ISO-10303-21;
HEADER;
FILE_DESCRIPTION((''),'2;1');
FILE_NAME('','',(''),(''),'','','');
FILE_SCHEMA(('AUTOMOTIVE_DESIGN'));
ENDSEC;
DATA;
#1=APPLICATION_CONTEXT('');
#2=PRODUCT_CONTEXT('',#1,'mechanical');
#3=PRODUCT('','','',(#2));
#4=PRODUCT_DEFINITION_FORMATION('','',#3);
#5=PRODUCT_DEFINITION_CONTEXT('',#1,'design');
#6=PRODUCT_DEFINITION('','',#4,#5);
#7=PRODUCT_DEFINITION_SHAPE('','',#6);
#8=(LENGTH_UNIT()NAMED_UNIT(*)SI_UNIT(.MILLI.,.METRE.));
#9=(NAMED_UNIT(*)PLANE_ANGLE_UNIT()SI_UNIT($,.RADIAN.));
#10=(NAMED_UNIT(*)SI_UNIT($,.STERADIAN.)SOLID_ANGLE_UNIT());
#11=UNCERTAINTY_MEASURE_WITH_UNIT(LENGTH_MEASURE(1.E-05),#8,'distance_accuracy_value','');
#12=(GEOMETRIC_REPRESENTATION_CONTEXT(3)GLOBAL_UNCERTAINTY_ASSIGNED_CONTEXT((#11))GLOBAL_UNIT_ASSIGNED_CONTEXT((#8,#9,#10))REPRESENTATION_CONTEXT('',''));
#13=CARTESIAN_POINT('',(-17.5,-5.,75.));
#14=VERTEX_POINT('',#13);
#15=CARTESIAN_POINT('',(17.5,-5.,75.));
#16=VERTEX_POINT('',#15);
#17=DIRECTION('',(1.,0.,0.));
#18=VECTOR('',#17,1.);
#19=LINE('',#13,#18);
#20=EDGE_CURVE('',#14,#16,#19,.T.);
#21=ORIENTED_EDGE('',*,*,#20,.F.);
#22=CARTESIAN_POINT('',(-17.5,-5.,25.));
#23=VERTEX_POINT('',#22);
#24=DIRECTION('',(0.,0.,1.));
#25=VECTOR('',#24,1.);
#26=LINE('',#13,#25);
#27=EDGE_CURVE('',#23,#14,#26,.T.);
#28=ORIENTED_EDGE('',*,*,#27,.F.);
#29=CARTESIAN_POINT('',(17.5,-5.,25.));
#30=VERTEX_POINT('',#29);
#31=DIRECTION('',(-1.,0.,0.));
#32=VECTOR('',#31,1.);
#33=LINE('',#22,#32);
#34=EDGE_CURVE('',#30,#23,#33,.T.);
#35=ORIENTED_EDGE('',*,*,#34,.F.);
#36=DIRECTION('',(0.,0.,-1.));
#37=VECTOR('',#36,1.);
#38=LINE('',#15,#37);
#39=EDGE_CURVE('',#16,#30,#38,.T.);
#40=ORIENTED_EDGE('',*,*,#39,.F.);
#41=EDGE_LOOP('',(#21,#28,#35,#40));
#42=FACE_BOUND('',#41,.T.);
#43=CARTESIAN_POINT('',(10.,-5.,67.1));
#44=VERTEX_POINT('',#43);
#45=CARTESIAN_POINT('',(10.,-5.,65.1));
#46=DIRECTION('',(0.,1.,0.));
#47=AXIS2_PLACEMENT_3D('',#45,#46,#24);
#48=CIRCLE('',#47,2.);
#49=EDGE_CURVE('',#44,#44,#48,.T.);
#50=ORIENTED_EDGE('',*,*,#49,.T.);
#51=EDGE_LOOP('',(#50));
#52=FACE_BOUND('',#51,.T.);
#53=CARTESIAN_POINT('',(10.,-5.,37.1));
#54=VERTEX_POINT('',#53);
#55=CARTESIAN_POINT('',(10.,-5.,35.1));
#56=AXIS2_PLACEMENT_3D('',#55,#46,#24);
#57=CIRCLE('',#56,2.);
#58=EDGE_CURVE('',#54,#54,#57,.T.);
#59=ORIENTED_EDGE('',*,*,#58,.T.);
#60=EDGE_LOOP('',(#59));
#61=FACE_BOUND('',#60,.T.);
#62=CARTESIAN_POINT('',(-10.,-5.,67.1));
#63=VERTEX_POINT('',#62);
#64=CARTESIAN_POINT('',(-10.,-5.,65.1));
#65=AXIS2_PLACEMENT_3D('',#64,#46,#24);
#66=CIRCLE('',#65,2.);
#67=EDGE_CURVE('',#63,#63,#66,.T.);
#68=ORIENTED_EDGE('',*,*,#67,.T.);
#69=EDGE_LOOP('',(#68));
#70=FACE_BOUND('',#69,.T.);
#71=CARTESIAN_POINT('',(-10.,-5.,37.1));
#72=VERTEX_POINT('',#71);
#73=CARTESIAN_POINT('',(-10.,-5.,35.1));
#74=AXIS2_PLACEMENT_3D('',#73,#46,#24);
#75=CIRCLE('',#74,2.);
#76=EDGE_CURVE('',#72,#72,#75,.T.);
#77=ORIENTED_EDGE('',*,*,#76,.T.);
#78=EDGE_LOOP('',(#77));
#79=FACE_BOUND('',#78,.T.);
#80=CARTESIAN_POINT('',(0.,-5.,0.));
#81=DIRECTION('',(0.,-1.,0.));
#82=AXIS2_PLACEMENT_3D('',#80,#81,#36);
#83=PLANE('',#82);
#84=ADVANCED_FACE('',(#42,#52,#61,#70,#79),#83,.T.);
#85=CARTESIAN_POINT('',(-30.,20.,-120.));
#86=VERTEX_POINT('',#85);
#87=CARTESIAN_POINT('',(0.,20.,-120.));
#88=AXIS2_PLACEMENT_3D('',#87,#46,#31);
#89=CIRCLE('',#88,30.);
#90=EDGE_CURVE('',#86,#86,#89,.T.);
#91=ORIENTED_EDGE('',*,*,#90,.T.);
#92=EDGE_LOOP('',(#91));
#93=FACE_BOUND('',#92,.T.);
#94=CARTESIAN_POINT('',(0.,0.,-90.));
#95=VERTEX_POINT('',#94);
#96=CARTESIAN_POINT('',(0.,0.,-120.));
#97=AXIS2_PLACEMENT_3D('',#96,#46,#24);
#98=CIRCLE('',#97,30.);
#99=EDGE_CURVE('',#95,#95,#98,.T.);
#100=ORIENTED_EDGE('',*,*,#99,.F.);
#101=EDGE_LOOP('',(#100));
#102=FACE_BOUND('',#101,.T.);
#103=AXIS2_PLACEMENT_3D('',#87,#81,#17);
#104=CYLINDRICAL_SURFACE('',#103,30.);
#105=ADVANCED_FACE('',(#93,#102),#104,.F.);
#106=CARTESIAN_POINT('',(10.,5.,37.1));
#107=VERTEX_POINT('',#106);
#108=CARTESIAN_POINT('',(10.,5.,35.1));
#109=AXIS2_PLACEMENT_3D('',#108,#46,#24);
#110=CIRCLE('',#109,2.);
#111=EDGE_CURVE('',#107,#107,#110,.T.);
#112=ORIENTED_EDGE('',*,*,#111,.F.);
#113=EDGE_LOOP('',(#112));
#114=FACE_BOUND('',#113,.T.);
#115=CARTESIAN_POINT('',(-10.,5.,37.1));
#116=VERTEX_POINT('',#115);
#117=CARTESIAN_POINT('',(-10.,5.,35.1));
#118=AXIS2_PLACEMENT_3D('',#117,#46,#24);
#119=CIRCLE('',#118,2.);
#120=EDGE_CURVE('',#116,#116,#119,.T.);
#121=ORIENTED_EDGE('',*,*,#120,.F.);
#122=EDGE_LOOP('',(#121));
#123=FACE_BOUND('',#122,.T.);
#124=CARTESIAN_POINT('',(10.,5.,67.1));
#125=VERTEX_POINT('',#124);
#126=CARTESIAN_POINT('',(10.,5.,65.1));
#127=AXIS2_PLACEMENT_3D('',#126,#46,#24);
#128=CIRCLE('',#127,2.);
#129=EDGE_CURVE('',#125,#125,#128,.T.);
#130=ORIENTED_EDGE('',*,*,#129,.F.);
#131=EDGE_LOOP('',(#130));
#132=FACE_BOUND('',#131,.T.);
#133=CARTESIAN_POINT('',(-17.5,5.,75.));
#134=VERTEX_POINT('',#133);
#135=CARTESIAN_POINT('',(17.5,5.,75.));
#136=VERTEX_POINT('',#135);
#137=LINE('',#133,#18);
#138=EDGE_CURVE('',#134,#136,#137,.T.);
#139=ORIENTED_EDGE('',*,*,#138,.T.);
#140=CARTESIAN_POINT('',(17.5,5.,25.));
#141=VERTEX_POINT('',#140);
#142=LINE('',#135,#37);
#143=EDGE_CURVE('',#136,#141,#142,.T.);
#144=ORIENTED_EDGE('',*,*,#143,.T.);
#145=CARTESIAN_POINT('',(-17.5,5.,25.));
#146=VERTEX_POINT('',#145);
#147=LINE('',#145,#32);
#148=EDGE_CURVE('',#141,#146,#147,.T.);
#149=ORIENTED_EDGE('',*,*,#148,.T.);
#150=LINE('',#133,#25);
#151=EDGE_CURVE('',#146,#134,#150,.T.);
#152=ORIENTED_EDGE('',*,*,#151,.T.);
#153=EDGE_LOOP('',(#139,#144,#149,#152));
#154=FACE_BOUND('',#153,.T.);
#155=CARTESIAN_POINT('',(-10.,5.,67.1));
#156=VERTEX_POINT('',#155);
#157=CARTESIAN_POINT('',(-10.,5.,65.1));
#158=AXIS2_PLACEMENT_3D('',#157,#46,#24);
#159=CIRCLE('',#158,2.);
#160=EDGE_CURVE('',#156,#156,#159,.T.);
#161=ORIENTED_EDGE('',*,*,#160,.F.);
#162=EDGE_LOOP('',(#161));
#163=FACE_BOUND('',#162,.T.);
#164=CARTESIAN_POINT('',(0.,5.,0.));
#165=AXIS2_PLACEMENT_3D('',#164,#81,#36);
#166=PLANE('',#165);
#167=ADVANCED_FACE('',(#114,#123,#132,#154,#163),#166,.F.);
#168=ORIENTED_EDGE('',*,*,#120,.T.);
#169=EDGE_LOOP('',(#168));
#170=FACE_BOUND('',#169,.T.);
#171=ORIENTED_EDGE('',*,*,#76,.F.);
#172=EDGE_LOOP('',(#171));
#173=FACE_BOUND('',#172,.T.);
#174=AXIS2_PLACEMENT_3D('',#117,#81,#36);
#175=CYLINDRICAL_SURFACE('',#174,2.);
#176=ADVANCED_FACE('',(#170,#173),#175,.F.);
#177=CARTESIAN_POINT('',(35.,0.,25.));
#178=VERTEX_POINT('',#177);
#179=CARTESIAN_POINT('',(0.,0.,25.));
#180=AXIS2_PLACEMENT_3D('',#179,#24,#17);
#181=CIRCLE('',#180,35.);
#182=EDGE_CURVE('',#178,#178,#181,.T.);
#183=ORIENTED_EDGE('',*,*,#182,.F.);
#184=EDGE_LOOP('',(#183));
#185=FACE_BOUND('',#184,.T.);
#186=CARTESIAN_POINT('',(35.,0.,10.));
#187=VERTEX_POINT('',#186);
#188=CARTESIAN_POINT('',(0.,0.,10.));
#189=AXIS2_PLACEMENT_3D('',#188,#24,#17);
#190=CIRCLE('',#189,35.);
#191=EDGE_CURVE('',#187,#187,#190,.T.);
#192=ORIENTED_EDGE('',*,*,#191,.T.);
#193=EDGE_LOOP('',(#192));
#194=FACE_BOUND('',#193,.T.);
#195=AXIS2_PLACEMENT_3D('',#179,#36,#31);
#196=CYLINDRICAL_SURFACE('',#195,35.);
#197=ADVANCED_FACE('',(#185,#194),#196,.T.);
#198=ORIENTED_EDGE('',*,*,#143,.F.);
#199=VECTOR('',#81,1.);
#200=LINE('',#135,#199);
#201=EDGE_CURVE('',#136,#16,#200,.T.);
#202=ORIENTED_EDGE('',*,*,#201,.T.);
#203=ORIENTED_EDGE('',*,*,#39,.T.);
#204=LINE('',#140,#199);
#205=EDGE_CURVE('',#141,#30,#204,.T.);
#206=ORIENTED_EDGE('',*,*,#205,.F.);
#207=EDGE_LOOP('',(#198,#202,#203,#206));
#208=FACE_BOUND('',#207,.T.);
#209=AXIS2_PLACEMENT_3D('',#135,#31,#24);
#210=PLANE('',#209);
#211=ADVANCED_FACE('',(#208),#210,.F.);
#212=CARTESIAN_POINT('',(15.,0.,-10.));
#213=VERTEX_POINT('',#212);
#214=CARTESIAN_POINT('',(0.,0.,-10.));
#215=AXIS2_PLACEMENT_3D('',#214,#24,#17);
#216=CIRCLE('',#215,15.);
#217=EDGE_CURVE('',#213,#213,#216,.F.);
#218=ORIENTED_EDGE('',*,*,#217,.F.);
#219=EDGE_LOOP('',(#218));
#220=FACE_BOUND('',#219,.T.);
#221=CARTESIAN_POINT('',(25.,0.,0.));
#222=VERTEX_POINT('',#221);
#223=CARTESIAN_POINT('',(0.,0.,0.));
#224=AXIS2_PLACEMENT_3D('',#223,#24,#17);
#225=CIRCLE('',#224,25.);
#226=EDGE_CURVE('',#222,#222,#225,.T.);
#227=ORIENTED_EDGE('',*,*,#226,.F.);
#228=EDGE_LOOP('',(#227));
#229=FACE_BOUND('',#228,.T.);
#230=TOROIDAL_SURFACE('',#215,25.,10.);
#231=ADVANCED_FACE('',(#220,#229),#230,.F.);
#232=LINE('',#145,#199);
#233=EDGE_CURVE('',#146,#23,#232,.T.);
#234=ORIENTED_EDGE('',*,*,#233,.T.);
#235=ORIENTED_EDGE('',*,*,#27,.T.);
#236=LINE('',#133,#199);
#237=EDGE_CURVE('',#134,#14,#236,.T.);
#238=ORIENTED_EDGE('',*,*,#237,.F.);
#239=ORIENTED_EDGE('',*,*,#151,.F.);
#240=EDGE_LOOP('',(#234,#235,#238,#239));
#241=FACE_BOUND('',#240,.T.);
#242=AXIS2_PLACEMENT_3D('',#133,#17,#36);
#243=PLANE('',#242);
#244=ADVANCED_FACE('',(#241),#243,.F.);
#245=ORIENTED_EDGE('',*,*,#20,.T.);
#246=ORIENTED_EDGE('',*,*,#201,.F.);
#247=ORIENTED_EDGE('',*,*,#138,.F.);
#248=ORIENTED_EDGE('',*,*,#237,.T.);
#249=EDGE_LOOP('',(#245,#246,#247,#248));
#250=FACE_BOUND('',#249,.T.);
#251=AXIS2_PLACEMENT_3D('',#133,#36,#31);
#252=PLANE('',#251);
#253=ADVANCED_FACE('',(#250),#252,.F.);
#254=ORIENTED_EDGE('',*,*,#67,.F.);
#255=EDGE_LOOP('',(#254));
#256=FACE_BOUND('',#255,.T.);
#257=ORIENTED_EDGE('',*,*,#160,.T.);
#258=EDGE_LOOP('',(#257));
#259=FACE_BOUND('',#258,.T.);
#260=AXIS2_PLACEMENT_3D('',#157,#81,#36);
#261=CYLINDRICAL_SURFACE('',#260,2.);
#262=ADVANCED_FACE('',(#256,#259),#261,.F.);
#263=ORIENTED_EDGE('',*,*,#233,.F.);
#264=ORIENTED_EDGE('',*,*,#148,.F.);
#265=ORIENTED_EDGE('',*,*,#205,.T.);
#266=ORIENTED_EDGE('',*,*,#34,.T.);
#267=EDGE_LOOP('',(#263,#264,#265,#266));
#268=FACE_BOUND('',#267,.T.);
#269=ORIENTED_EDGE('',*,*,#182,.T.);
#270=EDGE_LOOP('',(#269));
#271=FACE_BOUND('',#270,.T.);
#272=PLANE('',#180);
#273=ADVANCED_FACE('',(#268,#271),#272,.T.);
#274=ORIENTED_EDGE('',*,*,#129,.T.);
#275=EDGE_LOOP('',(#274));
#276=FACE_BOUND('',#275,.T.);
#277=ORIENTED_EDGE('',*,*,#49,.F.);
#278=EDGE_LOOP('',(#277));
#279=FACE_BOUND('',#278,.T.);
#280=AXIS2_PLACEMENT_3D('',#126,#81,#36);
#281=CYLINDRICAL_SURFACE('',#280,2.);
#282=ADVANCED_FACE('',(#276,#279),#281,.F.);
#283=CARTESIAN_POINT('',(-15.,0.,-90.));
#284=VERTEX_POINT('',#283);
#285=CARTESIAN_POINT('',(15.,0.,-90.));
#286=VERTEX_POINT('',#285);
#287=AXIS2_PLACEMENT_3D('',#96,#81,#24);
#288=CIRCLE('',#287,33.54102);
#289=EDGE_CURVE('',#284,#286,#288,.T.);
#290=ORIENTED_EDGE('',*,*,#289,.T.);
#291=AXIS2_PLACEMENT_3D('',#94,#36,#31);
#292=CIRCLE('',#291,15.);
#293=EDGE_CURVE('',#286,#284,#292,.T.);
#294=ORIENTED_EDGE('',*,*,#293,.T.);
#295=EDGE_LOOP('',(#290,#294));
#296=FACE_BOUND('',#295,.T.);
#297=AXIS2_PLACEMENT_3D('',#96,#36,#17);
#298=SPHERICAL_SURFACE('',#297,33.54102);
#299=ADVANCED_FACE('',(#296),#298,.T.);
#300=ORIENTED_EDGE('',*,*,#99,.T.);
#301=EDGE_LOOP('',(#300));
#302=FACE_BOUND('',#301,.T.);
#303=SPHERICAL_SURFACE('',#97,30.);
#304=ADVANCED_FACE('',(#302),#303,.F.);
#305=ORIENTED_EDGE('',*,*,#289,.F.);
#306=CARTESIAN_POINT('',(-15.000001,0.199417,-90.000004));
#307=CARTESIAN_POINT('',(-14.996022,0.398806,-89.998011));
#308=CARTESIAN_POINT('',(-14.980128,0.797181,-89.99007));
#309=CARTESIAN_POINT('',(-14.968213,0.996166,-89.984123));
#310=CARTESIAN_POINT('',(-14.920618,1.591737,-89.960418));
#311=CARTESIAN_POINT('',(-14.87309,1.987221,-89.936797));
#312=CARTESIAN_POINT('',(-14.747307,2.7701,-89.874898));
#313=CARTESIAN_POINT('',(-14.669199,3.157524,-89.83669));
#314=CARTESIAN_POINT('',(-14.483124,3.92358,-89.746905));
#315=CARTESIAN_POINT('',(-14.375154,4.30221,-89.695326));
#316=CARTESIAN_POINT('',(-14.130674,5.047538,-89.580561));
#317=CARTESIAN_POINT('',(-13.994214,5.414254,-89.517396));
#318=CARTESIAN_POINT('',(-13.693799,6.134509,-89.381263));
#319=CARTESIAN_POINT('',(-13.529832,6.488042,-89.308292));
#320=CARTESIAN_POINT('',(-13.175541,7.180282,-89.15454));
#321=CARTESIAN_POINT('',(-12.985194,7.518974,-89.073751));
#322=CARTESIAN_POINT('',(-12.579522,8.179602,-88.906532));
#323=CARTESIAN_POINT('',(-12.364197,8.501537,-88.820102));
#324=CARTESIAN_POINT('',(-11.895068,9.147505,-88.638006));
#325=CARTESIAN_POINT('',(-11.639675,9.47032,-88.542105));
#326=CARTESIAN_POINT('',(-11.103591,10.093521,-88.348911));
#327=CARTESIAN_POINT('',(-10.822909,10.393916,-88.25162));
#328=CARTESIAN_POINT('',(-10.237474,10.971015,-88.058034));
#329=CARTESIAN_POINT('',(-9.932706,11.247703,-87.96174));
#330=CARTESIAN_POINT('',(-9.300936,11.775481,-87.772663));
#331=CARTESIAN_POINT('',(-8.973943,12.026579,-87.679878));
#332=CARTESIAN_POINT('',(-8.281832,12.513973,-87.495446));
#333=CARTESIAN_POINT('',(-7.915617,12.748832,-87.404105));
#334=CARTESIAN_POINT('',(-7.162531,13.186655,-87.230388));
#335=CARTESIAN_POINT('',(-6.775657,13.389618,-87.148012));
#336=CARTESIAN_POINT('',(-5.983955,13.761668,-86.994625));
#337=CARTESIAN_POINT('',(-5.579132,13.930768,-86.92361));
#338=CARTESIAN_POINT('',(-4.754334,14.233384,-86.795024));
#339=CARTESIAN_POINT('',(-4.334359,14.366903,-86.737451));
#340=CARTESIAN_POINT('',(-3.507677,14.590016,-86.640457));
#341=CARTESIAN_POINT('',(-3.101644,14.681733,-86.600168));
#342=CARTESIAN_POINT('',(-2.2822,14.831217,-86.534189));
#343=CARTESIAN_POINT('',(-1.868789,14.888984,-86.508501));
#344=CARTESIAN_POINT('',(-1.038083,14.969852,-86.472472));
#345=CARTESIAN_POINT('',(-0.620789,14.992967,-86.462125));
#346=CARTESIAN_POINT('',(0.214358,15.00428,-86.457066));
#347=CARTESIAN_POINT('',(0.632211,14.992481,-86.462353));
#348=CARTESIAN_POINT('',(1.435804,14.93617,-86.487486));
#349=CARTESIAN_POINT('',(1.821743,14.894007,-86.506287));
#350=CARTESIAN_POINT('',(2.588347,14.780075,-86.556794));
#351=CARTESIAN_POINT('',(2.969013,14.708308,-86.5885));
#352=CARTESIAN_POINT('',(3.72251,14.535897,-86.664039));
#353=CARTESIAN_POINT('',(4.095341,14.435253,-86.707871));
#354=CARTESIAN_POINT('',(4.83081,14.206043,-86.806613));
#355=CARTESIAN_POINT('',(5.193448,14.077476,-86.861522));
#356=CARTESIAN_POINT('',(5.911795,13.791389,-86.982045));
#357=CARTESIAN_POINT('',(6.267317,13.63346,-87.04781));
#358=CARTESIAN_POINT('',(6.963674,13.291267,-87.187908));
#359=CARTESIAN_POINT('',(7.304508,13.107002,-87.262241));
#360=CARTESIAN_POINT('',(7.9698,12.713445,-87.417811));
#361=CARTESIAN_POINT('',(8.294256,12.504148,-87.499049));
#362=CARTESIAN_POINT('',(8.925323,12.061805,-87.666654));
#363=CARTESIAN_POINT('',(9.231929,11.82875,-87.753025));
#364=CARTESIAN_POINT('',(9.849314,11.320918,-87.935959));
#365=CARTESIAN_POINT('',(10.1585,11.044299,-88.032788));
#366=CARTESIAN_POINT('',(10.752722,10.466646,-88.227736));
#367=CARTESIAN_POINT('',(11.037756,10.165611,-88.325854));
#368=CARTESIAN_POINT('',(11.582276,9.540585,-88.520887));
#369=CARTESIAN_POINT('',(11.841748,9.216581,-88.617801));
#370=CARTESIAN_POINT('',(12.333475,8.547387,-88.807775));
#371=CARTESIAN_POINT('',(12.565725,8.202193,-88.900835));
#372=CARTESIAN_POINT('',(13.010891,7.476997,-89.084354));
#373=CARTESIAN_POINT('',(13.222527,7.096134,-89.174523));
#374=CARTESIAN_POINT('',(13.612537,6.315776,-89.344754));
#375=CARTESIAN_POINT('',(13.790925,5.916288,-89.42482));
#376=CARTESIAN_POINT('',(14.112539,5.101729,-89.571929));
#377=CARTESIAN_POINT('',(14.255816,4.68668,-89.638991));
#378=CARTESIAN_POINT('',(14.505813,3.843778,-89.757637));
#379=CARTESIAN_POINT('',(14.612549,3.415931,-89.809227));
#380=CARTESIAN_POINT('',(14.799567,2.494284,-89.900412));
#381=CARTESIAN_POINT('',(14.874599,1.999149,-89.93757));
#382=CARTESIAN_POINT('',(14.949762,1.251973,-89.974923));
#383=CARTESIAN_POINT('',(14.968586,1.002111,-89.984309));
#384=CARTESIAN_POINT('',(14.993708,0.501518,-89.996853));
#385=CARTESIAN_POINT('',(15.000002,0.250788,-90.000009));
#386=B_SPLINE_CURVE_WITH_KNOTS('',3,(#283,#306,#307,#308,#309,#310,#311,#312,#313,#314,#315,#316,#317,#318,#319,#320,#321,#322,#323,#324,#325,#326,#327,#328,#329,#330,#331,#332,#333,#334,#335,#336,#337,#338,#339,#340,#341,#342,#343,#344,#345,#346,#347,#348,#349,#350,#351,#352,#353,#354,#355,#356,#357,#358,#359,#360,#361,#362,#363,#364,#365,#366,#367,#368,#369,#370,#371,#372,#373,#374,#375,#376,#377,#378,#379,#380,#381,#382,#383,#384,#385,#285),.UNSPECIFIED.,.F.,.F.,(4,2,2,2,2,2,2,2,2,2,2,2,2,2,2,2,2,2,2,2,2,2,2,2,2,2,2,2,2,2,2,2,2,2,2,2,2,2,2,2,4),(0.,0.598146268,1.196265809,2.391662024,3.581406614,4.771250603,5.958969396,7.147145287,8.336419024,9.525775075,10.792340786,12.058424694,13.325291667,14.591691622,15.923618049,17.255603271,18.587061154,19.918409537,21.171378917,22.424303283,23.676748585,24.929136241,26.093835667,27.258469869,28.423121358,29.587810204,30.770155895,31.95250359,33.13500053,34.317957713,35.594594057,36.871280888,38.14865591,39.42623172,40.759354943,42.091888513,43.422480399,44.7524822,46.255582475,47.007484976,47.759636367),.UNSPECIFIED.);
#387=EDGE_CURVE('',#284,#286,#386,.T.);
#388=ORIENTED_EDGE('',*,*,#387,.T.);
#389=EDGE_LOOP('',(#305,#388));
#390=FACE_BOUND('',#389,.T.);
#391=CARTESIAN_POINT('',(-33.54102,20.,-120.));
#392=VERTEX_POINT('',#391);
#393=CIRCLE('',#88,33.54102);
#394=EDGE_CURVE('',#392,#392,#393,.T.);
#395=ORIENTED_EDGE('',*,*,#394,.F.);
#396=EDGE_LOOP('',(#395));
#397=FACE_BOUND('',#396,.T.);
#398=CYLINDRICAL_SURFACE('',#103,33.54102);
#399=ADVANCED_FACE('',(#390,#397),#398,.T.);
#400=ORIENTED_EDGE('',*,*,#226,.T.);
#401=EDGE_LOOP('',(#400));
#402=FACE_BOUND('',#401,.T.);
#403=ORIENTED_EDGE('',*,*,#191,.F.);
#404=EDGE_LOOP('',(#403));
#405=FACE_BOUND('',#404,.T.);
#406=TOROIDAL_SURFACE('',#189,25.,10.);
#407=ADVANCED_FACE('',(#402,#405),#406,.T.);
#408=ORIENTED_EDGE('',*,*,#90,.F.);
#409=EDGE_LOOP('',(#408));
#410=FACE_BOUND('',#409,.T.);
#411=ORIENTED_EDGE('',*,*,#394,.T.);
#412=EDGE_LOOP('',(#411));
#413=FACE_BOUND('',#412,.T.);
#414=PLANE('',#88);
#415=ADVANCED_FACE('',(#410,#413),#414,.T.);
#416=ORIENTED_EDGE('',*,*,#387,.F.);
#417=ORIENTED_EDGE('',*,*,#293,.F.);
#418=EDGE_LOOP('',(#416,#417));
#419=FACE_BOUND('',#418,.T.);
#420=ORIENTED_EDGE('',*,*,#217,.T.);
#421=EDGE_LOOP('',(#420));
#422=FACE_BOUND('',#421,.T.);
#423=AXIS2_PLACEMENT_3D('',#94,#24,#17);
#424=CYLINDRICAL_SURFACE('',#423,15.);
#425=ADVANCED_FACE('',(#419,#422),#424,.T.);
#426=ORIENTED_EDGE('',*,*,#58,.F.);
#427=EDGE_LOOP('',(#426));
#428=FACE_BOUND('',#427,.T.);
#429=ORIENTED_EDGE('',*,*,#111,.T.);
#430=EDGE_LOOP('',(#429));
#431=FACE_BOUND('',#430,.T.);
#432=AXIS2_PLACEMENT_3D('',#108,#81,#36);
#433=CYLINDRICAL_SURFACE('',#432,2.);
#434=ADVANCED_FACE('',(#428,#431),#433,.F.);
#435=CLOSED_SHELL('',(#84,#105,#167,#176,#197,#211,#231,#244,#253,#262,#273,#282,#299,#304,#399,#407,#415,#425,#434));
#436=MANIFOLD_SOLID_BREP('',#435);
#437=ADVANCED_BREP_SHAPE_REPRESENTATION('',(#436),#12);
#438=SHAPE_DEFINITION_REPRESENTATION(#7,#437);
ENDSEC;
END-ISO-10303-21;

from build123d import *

# Parameters (mm, degrees)
SKETCH1_R                 = 35
BOSS_EXTRUDE1_DEPTH       = 25
SKETCH2_R                 = 15
BOSS_EXTRUDE2_DEPTH       = 90
FILLET1_R                 = 10
SKETCH3_W                 = 35
SKETCH3_H                 = 50
SKETCH3_R                 = 2
BOSS_EXTRUDE3_DEPTH       = 5
REVOLVE1_ANGLE            = 180
BOSS_EXTRUDE4_OUTLINE_R   = 33.541019662
BOSS_EXTRUDE4_OUTLINE_R_2 = 30
BOSS_EXTRUDE4_DEPTH       = 20


# Read off the part's stored shape, not the designer's step: Boss-Extrude4
with BuildPart() as part:
    # Sketch1 → Boss-Extrude1 (new body)
    with BuildSketch(Plane.XY):
        Circle(SKETCH1_R)
    extrude(amount=BOSS_EXTRUDE1_DEPTH)

    # Sketch2 → Boss-Extrude2 (add)
    with BuildSketch(Plane(origin=(0, 0, 0), x_dir=(-1, 0, 0), z_dir=(0, 0, -1))):
        with Locations(Location((0, 0, 0), (0, 0, 180))):
            Circle(SKETCH2_R)
    extrude(amount=BOSS_EXTRUDE2_DEPTH)

    # Fillet1
    fillet1_edges = [part.edges().sort_by_distance(p)[0] for p in [
        (-35, 0, 0),
        (-15, 0, 0),
    ]]
    fillet(fillet1_edges, radius=FILLET1_R - 0.0001)  # a hair under: the kernel refuses the full size

    # Sketch3 → Boss-Extrude3 (add, symmetric)
    with BuildSketch(Plane(origin=(0, 0, 0), x_dir=(1, 0, 0), z_dir=(0, 1, 0))):
        with Locations((0, -50)):
            Rectangle(SKETCH3_W, SKETCH3_H)
        with Locations(Location((-10, -35.1, 0), (0, 0, 270))):
            Circle(SKETCH3_R, mode=Mode.SUBTRACT)
        with Locations(Location((10, -35.1, 0), (0, 0, 270))):
            Circle(SKETCH3_R, mode=Mode.SUBTRACT)
        with Locations(Location((10, -65.1, 0), (0, 0, 270))):
            Circle(SKETCH3_R, mode=Mode.SUBTRACT)
        with Locations(Location((-10, -65.1, 0), (0, 0, 270))):
            Circle(SKETCH3_R, mode=Mode.SUBTRACT)
    extrude(amount=BOSS_EXTRUDE3_DEPTH, both=True)

    # Sketch4 → Revolve1 (revolve)
    with BuildSketch(Plane(origin=(0, 0, 0), x_dir=(1, 0, 0), z_dir=(0, 1, 0))):
        with BuildLine():
            Line((0, 150), (0, 153.541019662))
            ThreePointArc((0, 153.541019662), (-33.541019662, 120), (0, 86.458980338))
            Line((0, 86.458980338), (0, 90))
            ThreePointArc((0, 90), (-30, 120), (0, 150))
        make_face()
    revolve(axis=Axis((0, 0, -90), (0, 0, 1)), revolution_arc=REVOLVE1_ANGLE)

    # Boss-Extrude4 outline → Boss-Extrude4 (add)
    with BuildSketch(Plane(origin=(0, 0, 0), x_dir=(1, 0, 0), z_dir=(0, 1, 0))):
        with Locations((0, 120)):
            Circle(BOSS_EXTRUDE4_OUTLINE_R)
        with Locations((0, 120)):
            Circle(BOSS_EXTRUDE4_OUTLINE_R_2, mode=Mode.SUBTRACT)
    extrude(amount=BOSS_EXTRUDE4_DEPTH)


solid = part.part
